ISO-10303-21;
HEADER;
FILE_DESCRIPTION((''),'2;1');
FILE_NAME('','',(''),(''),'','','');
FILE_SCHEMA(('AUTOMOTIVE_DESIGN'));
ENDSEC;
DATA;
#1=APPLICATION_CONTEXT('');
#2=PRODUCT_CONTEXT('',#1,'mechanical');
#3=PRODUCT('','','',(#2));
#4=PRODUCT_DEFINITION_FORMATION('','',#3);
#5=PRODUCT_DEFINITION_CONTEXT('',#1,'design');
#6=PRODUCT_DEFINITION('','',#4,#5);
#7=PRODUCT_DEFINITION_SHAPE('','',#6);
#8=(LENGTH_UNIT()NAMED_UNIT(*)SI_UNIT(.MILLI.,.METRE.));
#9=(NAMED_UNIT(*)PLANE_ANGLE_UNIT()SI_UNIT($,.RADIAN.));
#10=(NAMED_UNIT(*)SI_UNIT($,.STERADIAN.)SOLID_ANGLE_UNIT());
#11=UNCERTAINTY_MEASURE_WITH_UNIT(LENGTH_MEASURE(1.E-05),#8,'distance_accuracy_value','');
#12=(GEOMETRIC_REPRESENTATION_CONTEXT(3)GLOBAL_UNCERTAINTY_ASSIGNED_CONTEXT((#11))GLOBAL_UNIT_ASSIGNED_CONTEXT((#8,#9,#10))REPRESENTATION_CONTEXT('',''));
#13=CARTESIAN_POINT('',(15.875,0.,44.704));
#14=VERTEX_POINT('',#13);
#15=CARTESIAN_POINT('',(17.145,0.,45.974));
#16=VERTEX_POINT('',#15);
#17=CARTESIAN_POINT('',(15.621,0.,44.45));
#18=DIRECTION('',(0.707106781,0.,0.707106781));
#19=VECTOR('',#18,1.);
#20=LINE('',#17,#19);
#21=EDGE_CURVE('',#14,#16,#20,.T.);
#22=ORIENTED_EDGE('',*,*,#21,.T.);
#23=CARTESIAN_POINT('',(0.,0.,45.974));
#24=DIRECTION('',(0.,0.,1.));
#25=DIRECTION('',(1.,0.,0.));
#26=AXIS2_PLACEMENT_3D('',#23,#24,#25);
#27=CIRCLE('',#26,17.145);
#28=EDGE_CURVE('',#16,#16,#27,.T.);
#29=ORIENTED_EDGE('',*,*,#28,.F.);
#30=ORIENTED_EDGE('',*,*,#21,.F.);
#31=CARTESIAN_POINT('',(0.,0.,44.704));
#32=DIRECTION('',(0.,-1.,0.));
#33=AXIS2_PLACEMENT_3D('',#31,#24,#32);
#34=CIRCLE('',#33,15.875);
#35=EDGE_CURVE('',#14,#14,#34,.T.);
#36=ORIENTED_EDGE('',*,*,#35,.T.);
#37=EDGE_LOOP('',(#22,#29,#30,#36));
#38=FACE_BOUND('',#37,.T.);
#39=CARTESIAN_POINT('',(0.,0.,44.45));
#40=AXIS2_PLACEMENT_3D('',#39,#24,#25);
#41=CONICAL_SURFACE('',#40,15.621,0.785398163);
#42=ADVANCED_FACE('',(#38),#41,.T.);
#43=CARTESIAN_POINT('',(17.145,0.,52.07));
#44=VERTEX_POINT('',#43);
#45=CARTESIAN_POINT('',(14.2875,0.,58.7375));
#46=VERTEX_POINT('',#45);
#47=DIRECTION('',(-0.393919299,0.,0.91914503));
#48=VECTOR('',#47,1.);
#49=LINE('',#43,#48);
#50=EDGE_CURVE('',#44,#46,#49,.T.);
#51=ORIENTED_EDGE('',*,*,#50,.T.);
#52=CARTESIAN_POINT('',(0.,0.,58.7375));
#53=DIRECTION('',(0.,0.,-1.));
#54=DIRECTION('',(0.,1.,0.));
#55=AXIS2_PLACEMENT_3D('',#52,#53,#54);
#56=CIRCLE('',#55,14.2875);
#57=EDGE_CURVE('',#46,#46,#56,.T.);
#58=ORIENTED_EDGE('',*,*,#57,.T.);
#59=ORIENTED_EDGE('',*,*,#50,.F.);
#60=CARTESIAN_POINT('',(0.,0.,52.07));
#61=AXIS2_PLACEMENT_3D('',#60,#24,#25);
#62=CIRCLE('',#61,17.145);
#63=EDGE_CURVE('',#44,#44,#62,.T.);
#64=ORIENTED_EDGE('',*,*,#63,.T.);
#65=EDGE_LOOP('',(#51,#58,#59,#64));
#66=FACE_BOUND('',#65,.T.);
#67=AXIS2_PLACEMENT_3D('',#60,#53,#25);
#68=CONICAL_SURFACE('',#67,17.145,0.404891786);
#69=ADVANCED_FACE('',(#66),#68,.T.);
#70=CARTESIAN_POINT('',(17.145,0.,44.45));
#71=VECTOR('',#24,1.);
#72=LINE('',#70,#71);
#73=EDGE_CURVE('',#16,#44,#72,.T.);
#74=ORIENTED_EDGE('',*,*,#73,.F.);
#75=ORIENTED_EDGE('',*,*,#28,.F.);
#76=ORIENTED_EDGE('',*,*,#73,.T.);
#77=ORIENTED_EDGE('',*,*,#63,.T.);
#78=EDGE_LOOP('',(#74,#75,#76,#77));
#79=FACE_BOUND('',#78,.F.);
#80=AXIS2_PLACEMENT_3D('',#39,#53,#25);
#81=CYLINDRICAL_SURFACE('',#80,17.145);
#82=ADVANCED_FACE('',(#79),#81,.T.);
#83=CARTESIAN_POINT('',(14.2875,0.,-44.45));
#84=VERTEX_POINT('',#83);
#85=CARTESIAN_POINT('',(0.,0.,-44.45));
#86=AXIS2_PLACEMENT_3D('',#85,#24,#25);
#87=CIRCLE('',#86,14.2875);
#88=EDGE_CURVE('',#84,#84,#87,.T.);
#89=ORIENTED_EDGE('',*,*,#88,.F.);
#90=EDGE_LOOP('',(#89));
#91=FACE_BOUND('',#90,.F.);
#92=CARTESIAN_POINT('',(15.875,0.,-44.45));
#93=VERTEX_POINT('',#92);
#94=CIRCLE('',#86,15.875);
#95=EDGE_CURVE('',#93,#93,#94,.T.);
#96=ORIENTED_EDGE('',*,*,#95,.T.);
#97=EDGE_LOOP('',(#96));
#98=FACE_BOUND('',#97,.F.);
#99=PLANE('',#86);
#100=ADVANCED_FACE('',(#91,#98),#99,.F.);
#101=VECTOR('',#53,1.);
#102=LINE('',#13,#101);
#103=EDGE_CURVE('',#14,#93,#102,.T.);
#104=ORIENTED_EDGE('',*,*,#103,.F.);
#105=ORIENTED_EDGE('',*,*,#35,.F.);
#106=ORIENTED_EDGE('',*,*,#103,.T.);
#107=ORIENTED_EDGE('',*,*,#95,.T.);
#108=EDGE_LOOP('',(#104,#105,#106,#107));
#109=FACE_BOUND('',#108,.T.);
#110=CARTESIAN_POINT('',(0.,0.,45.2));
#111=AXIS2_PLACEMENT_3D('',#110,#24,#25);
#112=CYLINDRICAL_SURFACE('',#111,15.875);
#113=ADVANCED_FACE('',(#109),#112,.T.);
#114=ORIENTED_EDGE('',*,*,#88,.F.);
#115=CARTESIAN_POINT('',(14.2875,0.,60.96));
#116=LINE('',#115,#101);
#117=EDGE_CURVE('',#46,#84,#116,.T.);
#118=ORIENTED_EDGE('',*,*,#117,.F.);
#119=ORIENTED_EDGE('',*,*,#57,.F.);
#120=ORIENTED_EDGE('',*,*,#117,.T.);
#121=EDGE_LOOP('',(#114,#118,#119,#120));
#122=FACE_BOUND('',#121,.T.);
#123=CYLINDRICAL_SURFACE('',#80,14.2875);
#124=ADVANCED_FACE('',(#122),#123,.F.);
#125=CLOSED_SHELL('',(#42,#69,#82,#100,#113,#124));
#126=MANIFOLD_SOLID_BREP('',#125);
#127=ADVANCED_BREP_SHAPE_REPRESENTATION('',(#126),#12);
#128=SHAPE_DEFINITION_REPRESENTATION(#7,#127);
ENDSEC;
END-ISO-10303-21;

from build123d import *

# Parameters (mm, degrees)
F0_R        = 15.875
F0_R_2      = 14.2875
F1_DEPTH    = 44.45
F2_R        = 17.145
F2_R_2      = 14.2875
F3_DEPTH    = 16.51
F5_S5_R     = 15.875
F5_T6_DEPTH = 26


# Not quite as in the source:
# - a fillet or chamfer that OpenCascade refuses, or shapes differently, is made with other operations: its cross-section is extruded or revolved along the edge and cut away or added


with BuildPart() as f1:
    # F0 (on Top) → F1 (new body, symmetric)
    with BuildSketch(Plane.XY):
        Circle(F0_R)
        Circle(F0_R_2, mode=Mode.SUBTRACT)
    extrude(amount=F1_DEPTH, both=True)

    # F2 (on face) → F3 (join)
    with BuildSketch(Plane.XY.offset(44.45)):
        Circle(F2_R)
        Circle(F2_R_2, mode=Mode.SUBTRACT)
    extrude(amount=F3_DEPTH)

    # F4: chamfer of 3.81 x 8.89 on 1 edges, made by hand

    # F4_s1 → F4_t2 (revolve, cut)
    with BuildSketch(Plane.XZ):
        Polygon((17.145, 52.07), (13.335, 60.96), (17.145, 60.96), align=None)
    revolve(axis=Axis((0, 0, 60.96), (0, 0, 1)), mode=Mode.SUBTRACT)

    # F5: chamfer of 1.524 on 1 edges, made by hand


with BuildPart() as f5_tool2:
    # F5_s3 → F5_t4 (revolve)
    with BuildSketch(Plane.XZ):
        Polygon((15.621, 44.45), (17.145, 45.974), (17.145, 44.45), align=None)
    revolve(axis=Axis((0, 0, 44.45), (0, 0, 1)))

    # F5_s5 → F5_t6 (cut, symmetric)
    with BuildSketch(Plane.XY.offset(45.2)):
        Circle(F5_S5_R)
    extrude(amount=F5_T6_DEPTH, both=True, mode=Mode.SUBTRACT)


with BuildPart() as f1_1:
    add(f1.part)

    # F5_t1: cut F5_tool2
    add(f5_tool2.part, mode=Mode.SUBTRACT)


solid = f1_1.part
